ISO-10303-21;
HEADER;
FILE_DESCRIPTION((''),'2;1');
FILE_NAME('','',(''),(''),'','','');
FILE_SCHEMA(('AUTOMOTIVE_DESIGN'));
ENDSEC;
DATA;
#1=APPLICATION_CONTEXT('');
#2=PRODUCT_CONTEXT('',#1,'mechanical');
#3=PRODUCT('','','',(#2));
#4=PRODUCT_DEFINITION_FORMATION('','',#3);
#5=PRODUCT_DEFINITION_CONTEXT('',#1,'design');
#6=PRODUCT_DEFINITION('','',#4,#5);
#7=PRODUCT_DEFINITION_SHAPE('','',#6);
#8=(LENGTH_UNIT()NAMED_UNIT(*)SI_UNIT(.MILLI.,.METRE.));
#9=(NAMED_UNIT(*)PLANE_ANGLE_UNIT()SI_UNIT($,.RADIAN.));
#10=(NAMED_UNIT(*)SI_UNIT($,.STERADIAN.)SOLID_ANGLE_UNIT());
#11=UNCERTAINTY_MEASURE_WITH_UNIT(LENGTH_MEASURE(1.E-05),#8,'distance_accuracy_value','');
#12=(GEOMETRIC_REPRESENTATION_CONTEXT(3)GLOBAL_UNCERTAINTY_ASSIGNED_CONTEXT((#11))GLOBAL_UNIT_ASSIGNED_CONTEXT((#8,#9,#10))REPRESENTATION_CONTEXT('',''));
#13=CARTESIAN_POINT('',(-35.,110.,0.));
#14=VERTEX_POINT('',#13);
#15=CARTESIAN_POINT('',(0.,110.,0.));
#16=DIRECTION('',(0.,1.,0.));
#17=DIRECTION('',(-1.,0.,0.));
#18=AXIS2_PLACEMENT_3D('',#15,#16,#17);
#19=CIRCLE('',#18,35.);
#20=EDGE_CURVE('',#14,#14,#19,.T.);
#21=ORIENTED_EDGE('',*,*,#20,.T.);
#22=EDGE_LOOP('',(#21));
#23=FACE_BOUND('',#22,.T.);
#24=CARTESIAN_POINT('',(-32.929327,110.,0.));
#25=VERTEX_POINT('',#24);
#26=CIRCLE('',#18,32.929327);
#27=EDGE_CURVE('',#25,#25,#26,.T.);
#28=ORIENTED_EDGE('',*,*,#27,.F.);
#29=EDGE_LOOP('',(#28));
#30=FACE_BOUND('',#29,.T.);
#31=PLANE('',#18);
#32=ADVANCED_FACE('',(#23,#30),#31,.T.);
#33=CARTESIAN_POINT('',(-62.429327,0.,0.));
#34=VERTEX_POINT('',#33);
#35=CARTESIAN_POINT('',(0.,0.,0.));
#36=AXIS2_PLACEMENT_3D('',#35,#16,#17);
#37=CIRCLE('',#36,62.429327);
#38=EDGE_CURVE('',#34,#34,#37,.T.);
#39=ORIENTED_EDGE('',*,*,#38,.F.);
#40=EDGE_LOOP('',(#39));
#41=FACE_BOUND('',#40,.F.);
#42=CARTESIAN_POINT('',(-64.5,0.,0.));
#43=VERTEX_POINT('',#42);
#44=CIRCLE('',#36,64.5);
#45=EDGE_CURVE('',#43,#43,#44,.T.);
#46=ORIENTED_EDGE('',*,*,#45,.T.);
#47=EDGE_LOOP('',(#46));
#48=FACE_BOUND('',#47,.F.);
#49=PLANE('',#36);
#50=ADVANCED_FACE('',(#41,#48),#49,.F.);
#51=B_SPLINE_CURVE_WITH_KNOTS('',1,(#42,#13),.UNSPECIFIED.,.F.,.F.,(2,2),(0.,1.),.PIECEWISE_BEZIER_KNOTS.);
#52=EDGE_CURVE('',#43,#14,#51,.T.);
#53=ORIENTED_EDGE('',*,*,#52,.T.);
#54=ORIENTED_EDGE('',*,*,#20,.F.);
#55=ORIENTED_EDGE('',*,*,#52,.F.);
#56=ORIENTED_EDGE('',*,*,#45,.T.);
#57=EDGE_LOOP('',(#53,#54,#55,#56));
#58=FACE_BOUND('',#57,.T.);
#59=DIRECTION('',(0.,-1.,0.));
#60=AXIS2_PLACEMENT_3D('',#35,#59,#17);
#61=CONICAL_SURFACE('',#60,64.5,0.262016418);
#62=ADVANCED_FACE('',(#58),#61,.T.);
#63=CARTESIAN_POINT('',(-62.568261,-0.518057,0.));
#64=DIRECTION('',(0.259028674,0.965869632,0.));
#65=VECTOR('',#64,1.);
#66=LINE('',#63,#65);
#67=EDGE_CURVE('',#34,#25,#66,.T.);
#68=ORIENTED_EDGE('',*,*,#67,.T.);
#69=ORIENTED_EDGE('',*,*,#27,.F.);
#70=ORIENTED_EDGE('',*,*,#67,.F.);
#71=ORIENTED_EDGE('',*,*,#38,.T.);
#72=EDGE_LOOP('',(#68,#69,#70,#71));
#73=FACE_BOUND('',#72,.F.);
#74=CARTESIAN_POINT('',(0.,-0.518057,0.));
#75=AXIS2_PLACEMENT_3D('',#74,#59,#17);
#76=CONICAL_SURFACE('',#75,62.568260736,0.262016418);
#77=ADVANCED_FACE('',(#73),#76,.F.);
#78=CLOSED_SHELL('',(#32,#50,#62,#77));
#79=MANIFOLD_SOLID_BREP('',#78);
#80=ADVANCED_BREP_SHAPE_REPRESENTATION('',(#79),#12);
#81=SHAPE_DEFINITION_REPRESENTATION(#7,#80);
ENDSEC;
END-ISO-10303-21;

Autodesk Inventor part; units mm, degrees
ref_plane "YZ Plane" through (0, 0, 0) normal (1, 0, 0) x (0, 1, 0)
ref_plane "XY Plane" through (0, 0, 0) normal (0, 0, 1) x (1, 0, 0)
sketch "Szkic6" plane through (0, 0, 0) normal (0, 1, 0) x (-1, 0, 0)
  circle A0 centre (0, 0) radius 64.5
  dimension "d33" = 129
ref_plane "Płaszczyzna konstrukcyjna1" through (0, 110, 0) normal (0, 1, 0) x (-1, 0, 0)
sketch "Szkic7" plane through (0, 110, 0) normal (0, 1, 0) x (-1, 0, 0)
  circle A0 centre (0, 0) radius 35
  dimension "d35" = 70
loft "Wyciągnięcie złożone1" add profiles "Szkic6", "Szkic7"
shell "Skorupa1" thickness 2 removed faces 2 at (1.9985, 110, 11.019) at (-10.0865, 0, -16.1433)
equation "\"d33\" = OD1"
equation "\"d35\" = OD2"
equation "\"d52\" = THK"
equation "\"SzerokośćGięciaPodcięcia\" = Grubość"
equation "\"RozmiarPodcięciaNarożnika\" = 4 * Grubość"
equation "\"PromieńPrzejścia\" = PromieńGięcia"
equation "\"Rozmiar_promienia_Jacobiego\" = PromieńGięcia"
equation "\"Wielk_odstępu\" = Grubość"
equation "\"d2\" = PromieńGięcia"
equation "\"d23\" = PromieńGięcia"
equation "\"OD1\" = 129"
equation "\"OD2\" = 70"
equation "\"THK\" = 2"
equation "\"Grubość\" = 1.5"
equation "\"PromieńGięcia\" = 3"
properties part number "Redukcja symetryczna Ø129x70x2 L=110" material "304"
